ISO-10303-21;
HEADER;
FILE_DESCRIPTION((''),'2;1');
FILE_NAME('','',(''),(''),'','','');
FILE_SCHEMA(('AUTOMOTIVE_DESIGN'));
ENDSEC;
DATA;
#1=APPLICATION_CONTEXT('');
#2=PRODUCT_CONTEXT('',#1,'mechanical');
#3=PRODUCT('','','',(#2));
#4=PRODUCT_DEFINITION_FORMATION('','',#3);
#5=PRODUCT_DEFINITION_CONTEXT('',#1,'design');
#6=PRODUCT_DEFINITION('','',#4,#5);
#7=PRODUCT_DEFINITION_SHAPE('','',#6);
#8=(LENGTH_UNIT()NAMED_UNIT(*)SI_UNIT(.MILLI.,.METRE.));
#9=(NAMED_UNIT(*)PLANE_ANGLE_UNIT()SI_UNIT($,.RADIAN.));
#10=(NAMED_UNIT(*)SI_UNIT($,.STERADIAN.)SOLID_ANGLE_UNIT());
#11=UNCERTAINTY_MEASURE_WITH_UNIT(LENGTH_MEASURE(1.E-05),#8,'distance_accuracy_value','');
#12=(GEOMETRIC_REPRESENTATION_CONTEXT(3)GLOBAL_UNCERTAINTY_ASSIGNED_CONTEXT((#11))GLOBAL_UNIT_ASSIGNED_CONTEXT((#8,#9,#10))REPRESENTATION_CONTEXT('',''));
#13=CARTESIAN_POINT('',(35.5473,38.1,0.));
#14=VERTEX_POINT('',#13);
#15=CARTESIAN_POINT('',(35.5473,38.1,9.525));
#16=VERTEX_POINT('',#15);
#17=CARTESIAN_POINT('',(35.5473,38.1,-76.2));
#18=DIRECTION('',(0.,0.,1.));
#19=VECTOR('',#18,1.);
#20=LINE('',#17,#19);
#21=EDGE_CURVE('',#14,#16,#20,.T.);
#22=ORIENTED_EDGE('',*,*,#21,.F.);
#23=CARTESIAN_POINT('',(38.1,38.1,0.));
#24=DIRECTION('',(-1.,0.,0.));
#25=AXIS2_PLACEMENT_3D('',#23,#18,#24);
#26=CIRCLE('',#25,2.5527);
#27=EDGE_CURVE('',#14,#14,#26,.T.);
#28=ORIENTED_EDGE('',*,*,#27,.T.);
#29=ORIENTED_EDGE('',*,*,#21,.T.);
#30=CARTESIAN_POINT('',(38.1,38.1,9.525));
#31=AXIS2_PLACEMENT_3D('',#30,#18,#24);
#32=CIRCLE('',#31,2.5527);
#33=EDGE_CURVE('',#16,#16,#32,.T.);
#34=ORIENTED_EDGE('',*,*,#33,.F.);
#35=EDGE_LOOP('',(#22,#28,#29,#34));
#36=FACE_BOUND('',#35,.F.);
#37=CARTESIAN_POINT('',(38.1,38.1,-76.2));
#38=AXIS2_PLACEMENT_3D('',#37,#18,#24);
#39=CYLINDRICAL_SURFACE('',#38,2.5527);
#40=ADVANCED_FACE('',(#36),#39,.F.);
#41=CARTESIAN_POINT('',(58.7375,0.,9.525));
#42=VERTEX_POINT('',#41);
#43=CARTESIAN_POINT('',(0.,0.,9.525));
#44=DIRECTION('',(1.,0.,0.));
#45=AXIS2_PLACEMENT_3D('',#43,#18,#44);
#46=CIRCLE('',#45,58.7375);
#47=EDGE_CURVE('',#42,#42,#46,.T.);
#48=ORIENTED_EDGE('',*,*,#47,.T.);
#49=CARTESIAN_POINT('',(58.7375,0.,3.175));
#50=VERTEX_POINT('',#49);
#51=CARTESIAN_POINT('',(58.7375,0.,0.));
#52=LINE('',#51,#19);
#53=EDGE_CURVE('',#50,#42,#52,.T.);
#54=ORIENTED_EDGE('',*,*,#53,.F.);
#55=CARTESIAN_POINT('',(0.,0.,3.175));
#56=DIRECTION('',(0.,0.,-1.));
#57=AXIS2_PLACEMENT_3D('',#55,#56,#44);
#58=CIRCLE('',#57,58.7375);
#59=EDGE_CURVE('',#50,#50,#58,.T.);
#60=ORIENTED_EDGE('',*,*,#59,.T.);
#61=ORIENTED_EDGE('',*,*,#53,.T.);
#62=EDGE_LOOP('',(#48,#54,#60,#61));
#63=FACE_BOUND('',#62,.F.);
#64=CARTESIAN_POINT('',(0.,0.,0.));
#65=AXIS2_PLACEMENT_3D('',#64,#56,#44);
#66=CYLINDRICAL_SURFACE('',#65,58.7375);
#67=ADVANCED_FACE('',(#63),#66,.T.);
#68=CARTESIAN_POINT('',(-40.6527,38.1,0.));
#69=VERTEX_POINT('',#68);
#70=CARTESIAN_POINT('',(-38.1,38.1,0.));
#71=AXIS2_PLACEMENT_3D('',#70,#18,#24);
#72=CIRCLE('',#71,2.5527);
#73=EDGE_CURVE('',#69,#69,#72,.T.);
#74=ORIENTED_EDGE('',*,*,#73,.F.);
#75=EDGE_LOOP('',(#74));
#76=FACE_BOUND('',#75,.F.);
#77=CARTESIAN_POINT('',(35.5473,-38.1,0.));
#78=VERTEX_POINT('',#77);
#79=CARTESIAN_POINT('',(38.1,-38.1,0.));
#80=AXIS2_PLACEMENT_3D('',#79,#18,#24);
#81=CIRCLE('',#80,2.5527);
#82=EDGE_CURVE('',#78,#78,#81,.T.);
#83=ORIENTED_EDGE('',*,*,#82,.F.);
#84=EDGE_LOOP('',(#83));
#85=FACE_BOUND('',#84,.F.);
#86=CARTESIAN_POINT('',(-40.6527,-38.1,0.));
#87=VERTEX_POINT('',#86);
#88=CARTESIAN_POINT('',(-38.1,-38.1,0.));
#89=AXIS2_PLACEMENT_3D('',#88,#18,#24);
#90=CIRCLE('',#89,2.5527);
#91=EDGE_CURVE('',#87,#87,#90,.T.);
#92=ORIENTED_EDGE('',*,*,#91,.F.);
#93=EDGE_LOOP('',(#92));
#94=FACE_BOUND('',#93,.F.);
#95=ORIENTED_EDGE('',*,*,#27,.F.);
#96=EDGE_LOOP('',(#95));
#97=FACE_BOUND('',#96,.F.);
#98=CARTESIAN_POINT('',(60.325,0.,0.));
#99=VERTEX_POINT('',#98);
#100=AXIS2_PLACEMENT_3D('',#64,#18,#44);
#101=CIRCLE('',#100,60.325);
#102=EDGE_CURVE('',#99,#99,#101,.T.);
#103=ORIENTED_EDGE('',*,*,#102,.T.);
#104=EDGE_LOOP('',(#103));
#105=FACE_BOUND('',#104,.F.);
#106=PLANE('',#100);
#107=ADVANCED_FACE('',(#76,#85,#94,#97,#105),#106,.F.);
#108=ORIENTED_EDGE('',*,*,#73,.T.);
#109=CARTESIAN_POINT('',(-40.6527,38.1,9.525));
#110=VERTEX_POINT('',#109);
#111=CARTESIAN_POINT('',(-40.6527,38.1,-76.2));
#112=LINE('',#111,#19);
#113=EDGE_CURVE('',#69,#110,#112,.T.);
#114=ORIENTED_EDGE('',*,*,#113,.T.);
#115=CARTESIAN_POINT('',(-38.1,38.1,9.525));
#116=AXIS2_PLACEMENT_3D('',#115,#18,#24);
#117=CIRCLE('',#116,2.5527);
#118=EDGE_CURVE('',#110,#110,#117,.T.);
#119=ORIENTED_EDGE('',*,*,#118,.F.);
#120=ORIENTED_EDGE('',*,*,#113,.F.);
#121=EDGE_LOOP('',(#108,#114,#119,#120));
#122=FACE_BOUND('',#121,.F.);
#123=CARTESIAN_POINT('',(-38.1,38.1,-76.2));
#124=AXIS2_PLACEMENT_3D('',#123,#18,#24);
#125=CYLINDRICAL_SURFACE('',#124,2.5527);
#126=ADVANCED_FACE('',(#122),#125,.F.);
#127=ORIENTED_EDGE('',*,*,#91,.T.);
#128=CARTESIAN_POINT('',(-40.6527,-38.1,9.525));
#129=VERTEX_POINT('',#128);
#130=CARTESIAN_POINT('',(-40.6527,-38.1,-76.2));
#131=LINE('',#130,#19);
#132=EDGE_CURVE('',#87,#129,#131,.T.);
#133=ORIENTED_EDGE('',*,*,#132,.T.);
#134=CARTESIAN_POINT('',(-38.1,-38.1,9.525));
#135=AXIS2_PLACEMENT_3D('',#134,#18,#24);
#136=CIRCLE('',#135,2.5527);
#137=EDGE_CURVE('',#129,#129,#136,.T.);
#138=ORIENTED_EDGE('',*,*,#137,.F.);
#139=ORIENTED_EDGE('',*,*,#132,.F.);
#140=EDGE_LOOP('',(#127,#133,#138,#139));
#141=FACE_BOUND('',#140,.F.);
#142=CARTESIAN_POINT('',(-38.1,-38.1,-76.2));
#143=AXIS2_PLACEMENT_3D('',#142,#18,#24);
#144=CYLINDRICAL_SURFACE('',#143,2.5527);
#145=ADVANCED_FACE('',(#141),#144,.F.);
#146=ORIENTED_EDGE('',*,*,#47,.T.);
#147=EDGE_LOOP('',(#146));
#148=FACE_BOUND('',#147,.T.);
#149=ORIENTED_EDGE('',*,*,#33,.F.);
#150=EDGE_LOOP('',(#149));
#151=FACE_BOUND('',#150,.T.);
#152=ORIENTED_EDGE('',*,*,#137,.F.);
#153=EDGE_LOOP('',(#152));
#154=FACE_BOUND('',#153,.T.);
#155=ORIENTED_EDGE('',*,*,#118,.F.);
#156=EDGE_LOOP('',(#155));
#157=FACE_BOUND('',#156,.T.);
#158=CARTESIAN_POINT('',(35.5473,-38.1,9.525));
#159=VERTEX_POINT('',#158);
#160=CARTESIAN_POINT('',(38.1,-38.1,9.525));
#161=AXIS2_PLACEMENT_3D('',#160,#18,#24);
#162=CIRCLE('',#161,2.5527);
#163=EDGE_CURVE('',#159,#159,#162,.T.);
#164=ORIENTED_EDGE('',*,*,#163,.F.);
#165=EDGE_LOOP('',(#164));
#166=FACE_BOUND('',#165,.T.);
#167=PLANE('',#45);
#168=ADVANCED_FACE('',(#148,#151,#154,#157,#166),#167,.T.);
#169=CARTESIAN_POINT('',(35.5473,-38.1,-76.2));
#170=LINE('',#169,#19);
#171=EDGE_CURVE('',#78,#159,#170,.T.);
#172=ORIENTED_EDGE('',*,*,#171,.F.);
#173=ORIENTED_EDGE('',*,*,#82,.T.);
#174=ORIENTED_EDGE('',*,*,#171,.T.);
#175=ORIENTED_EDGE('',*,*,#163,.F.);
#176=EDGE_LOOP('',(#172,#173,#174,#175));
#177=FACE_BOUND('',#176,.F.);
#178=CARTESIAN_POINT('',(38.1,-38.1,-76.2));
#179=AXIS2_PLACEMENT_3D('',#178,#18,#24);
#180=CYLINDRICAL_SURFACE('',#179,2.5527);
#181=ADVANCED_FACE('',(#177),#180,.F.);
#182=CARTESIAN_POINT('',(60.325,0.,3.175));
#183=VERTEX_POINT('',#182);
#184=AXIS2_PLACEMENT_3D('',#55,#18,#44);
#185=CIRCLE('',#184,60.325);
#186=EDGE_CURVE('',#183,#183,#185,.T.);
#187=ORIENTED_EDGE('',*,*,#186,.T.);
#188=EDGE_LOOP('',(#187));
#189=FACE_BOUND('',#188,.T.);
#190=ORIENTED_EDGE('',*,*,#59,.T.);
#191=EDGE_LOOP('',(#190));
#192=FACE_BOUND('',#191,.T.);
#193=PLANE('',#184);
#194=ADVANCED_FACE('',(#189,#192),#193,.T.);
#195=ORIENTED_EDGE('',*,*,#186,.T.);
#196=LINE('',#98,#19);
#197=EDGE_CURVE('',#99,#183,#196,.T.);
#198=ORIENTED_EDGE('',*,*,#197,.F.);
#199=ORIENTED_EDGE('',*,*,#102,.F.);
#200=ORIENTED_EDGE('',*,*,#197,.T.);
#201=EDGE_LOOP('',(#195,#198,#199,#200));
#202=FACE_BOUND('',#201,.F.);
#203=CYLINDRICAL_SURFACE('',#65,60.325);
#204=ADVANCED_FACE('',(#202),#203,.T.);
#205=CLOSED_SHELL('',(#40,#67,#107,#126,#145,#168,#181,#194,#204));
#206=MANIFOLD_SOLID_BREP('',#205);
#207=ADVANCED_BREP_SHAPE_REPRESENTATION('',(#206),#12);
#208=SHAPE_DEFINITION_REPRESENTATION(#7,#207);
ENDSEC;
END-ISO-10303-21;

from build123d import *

# Parameters (mm, degrees)
F0_R     = 60.325
F0_R_2   = 58.7375
F1_DEPTH = 3.175
F2_DEPTH = 9.525
F3_D     = 5.1054
F3_DEPTH = 76.2
F3_TIP   = 1.5338169022


# Not quite as in the source:
# - a feature names something its author has since deleted; it is built from what else it names


with BuildPart() as f1:
    # F0 (on Top) → F1 (new body)
    with BuildSketch(Plane.XY):
        Circle(F0_R)
        Circle(F0_R_2, mode=Mode.SUBTRACT)
        Circle(F0_R_2)
    extrude(amount=F1_DEPTH)

    # F0 (on Top) → F2 (join)
    with BuildSketch(Plane.XY):
        Circle(F0_R_2)
    extrude(amount=F2_DEPTH)

    # F3
    with Locations(Plane(origin=(0, 0, 0), x_dir=(1, 0, 0), z_dir=(0, 0, -1))):
        with Locations((38.1, -38.1), (-38.1, -38.1), (-38.1, 38.1), (38.1, 38.1)):
            Hole(F3_D / 2, depth=F3_DEPTH)
            with Locations((0, 0, -(F3_DEPTH + F3_TIP / 2))):  # 118° drill point
                Cone(0, F3_D / 2, F3_TIP, mode=Mode.SUBTRACT)


solid = f1.part
